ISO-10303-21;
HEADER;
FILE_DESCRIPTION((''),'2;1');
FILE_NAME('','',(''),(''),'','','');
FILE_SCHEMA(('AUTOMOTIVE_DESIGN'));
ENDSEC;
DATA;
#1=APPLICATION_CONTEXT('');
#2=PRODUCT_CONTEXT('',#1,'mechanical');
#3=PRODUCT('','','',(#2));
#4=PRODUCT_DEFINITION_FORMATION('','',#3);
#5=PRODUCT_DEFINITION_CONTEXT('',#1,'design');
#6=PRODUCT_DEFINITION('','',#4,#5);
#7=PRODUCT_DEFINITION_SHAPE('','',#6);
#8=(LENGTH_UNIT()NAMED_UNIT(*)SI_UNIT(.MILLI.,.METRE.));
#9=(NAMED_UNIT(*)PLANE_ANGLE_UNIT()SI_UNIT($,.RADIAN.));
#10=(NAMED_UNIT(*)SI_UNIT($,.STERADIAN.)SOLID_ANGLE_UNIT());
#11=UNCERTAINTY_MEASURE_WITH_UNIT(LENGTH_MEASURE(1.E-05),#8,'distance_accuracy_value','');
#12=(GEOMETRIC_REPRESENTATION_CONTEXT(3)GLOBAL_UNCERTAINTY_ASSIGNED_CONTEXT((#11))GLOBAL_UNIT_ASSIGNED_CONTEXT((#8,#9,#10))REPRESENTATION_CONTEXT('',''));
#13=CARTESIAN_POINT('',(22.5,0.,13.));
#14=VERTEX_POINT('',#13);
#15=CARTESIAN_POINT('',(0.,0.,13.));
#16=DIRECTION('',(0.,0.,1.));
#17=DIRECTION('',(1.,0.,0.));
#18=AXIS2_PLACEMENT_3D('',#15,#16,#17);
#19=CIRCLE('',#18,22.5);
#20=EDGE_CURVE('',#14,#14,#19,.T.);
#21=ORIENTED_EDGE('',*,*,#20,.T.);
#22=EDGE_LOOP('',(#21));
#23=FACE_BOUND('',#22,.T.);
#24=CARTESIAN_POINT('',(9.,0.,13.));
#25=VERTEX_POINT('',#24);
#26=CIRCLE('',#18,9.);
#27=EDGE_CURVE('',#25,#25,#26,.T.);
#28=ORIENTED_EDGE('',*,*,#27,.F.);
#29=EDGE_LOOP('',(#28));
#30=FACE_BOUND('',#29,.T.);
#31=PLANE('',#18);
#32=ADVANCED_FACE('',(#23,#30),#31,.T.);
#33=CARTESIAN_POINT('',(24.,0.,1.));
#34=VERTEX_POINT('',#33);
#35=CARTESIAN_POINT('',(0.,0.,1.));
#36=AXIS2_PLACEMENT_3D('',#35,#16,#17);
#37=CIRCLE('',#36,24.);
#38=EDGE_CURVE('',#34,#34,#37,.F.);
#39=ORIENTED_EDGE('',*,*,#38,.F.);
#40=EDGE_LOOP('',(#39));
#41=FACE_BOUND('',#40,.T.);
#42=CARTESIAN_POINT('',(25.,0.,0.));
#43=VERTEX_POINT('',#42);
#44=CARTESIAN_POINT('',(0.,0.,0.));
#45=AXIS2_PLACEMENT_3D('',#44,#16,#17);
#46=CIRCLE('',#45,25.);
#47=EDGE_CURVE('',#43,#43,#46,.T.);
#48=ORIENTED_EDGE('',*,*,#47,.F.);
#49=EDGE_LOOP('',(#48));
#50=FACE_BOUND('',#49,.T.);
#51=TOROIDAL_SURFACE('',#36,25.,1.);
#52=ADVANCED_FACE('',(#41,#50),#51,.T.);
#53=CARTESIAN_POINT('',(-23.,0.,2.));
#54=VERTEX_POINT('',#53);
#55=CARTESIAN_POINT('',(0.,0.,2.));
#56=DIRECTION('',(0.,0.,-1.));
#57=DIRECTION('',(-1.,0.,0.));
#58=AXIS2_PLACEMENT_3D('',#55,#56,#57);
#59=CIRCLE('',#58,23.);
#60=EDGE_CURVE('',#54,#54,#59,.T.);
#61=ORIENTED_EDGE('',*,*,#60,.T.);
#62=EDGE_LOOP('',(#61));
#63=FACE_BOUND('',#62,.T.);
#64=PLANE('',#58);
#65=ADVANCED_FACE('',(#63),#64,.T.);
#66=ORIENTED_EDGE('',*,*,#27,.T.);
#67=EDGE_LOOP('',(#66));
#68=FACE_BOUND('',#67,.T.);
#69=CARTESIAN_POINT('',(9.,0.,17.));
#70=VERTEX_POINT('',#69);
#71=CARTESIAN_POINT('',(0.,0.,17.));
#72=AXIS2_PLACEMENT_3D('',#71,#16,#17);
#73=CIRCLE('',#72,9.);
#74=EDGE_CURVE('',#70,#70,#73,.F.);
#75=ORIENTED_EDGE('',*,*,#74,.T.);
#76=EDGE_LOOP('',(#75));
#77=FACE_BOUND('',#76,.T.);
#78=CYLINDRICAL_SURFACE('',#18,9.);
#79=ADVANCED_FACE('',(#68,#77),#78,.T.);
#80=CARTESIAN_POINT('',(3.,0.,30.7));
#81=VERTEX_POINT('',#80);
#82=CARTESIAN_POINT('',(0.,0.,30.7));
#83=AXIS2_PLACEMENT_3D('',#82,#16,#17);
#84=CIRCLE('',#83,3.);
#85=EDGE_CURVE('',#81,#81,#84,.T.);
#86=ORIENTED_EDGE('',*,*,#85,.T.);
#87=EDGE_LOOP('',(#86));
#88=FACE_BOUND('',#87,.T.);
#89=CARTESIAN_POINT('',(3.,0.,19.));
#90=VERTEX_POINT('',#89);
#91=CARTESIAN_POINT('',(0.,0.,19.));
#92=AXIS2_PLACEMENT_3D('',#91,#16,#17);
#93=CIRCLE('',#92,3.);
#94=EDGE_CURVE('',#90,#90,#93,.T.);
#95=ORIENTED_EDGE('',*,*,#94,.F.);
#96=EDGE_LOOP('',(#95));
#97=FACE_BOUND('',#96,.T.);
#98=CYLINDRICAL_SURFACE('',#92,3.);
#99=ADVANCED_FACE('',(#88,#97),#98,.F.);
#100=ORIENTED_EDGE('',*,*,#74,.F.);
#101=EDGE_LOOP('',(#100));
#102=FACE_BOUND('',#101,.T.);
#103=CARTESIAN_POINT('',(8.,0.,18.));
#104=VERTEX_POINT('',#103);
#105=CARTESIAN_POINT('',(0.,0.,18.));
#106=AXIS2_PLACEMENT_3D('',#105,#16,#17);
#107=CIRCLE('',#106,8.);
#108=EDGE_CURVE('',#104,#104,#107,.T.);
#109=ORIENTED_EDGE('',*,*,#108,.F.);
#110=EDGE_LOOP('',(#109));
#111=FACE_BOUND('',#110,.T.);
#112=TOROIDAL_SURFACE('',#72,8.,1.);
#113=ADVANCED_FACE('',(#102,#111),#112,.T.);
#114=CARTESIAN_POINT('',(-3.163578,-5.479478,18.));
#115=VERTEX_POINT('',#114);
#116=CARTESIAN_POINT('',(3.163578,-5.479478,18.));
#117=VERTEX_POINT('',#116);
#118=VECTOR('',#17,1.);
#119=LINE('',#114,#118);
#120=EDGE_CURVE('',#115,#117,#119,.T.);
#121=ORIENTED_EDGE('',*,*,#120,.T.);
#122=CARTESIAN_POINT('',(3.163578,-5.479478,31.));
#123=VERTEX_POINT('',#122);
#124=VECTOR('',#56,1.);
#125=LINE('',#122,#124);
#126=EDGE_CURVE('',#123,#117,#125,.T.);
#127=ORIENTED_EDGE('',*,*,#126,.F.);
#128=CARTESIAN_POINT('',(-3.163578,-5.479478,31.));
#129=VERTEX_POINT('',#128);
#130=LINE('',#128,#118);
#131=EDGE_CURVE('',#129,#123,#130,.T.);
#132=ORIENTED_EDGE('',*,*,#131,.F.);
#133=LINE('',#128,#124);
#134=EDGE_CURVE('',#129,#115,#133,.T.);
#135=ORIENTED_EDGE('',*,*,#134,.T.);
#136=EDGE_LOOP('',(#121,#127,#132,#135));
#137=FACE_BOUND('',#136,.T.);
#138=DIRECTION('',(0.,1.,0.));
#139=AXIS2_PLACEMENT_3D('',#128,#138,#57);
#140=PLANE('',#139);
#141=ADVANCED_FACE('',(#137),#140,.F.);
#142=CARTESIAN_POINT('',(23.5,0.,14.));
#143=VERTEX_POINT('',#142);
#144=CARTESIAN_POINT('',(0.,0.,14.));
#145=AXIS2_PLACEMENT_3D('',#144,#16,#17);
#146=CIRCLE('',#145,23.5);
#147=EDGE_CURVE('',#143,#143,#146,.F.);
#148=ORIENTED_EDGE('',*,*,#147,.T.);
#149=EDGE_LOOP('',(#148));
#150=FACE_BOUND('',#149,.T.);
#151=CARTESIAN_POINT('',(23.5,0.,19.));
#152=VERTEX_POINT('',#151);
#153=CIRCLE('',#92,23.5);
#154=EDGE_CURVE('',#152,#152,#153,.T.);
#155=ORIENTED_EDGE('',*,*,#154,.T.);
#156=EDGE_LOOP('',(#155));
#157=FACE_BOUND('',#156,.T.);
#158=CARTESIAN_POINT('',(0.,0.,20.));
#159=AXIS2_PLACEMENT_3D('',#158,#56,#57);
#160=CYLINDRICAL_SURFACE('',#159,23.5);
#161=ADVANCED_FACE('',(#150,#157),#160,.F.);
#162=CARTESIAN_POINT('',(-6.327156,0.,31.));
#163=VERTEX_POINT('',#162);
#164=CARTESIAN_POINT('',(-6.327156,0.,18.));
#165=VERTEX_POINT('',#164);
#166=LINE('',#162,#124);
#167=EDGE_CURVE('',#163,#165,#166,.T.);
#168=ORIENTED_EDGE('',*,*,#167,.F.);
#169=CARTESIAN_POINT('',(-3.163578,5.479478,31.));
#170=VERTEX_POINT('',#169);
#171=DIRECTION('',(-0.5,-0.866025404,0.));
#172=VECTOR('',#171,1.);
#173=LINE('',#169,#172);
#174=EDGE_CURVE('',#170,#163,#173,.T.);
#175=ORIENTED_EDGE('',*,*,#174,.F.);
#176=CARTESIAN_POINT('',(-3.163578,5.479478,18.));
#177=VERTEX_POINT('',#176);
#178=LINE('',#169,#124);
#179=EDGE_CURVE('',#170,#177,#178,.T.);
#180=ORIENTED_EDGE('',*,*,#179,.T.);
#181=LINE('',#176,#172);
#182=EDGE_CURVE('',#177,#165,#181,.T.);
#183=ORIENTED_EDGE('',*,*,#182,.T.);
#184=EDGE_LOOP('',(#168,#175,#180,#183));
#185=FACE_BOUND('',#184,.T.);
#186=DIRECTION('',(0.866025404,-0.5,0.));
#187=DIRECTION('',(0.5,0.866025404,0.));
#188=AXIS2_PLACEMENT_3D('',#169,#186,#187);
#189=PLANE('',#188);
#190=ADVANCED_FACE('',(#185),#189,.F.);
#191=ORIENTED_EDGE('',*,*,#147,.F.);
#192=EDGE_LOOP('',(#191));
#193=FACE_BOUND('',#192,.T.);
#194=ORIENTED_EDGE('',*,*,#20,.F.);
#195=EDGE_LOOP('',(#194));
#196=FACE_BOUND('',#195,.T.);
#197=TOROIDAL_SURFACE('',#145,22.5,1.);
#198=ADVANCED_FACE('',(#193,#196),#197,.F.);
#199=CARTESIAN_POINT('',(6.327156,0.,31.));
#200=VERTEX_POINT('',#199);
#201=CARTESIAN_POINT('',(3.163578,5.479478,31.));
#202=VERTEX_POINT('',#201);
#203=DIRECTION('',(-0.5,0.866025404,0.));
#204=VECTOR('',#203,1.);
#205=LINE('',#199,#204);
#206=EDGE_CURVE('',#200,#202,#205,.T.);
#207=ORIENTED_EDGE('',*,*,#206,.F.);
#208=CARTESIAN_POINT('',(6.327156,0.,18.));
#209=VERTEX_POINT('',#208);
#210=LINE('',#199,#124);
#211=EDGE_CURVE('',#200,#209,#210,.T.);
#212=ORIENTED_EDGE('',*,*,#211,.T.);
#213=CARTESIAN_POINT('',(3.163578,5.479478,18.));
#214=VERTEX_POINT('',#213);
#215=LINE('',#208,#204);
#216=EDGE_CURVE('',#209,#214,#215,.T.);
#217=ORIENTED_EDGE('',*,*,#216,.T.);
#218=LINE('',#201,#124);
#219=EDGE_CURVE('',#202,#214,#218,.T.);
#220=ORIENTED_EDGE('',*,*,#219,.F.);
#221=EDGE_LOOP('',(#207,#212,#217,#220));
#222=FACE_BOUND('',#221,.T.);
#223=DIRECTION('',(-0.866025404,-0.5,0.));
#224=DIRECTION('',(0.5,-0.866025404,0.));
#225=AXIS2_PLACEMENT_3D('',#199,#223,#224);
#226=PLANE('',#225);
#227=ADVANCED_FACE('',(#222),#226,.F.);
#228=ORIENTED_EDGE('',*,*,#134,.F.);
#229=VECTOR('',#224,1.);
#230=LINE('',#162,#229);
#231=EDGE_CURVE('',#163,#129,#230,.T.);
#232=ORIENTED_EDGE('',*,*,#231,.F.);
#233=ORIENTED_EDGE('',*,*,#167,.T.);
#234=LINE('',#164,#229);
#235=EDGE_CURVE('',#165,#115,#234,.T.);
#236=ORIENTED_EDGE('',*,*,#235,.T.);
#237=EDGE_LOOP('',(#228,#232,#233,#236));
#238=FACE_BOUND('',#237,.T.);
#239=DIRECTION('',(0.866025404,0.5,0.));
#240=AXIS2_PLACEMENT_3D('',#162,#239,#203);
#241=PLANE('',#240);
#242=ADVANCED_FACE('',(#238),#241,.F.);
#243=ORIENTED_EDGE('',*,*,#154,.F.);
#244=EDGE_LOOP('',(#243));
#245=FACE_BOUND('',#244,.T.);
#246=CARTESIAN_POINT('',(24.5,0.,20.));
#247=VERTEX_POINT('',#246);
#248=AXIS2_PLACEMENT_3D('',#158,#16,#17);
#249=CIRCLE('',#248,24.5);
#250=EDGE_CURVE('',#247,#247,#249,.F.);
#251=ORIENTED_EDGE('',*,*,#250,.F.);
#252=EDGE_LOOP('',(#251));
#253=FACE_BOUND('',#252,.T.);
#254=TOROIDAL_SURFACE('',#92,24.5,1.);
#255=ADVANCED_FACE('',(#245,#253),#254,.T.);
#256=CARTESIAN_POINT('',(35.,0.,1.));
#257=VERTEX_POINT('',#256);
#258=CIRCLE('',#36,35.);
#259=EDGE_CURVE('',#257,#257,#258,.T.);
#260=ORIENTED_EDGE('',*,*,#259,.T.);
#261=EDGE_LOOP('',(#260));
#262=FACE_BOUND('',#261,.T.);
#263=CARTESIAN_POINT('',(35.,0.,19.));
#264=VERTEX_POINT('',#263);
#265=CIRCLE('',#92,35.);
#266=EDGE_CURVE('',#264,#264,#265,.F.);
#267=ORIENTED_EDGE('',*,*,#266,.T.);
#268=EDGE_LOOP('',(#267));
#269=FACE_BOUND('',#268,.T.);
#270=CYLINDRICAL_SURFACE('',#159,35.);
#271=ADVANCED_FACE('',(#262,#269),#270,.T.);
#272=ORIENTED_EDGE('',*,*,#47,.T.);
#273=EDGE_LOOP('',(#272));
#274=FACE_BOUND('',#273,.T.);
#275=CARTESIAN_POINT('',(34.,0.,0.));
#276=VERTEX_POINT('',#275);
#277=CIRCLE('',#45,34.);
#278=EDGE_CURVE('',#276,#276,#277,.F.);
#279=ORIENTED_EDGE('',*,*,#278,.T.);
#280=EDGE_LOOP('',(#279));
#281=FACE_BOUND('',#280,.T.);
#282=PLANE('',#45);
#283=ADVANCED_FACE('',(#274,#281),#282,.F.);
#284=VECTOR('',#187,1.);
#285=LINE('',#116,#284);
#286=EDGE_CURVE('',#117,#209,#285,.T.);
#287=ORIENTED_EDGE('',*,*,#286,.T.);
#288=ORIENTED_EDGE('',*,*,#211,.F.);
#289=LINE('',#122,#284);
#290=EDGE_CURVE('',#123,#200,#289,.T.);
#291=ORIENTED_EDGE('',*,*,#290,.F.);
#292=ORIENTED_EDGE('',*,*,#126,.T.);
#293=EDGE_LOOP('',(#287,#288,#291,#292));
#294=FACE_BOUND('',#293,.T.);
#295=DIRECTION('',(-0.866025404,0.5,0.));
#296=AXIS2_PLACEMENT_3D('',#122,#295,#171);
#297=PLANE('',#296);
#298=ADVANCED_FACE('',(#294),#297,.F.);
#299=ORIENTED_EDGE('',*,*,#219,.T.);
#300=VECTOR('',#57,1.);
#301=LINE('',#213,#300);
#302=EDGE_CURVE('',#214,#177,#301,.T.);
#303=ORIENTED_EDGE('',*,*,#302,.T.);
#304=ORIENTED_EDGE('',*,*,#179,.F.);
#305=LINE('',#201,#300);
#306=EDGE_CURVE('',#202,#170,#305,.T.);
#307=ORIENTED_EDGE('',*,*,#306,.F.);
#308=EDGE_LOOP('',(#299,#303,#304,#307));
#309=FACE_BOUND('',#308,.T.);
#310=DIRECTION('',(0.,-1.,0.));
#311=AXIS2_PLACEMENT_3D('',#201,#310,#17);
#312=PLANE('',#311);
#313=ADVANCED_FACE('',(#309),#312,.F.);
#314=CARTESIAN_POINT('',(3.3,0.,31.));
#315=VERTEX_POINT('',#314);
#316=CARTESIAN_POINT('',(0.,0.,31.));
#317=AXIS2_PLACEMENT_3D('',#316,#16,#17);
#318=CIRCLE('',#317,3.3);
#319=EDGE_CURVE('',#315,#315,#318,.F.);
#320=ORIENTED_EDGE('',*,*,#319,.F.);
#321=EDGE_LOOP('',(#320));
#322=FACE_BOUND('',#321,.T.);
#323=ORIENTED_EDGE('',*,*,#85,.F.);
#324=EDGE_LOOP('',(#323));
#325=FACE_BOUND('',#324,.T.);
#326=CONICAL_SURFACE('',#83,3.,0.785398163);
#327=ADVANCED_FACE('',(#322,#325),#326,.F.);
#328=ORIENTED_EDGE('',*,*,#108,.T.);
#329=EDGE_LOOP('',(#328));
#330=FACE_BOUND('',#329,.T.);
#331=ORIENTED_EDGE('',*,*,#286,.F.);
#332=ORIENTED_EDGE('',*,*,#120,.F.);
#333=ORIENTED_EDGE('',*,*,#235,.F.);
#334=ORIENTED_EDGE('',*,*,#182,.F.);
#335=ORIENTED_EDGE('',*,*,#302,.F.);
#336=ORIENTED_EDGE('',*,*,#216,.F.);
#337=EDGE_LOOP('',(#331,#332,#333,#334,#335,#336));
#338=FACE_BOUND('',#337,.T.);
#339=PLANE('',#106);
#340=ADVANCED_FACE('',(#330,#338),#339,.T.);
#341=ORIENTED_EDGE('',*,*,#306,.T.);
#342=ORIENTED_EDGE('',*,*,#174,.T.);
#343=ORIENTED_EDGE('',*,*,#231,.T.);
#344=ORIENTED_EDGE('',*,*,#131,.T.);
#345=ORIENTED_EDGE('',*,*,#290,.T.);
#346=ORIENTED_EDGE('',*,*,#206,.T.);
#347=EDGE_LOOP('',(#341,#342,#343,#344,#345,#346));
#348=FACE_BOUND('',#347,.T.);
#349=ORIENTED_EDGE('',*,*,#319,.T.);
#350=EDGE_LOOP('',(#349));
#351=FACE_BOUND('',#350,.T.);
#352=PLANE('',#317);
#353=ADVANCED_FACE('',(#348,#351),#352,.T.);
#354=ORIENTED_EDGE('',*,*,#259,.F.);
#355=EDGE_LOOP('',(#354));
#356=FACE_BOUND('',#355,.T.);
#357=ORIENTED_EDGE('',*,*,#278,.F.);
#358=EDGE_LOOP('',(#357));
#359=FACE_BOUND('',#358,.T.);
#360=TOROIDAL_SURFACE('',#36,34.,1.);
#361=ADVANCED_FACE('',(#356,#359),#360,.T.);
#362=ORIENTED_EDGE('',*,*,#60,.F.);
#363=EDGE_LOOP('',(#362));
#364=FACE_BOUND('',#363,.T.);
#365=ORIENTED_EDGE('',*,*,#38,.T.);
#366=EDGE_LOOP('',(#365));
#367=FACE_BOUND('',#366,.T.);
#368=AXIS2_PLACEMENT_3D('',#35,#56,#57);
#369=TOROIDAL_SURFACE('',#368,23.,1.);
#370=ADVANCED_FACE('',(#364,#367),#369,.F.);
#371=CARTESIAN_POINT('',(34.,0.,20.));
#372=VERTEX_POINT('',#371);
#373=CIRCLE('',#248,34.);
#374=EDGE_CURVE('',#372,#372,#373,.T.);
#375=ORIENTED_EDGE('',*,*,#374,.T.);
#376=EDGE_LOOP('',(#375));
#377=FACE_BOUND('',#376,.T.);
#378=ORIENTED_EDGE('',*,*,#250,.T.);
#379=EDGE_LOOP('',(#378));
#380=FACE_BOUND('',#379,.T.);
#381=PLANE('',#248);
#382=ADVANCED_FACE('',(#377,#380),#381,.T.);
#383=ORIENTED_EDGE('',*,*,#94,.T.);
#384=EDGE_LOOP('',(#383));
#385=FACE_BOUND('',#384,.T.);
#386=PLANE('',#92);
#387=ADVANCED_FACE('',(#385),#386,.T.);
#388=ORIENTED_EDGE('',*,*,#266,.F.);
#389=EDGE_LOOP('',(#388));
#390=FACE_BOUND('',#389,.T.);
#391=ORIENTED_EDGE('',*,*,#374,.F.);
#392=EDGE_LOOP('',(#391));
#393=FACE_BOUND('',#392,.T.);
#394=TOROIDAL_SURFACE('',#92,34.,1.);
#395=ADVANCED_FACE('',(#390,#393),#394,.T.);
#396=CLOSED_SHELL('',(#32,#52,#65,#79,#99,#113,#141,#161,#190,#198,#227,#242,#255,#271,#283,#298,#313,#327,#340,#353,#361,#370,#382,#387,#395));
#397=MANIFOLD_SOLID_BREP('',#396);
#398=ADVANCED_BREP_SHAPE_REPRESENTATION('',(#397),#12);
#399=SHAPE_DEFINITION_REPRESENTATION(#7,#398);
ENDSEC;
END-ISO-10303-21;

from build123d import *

# Parameters (mm, degrees)
SKETCH_1_R          = 35
SKETCH_1_R_2        = 23.5
EXTRUDE_1_DEPTH     = 20
SKETCH_2_R          = 23.5
EXTRUDE_2_DEPTH     = 18
EXTRUDE_3_DEPTH     = 13
CUT_EXTRUDE_START   = -5
SKETCH_4_R          = 23.5
SKETCH_4_R_2        = 9
CUT_EXTRUDE_1_DEPTH = 5
SKETCH_5_R          = 3
CUT_EXTRUDE_2_DEPTH = 12
SKETCH_7_R          = 24
CUT_EXTRUDE_3_DEPTH = 2
FILLET_1_R          = 1
CHAMFER_1_SIZE      = 0.3


with BuildPart() as part:
    # 草图1 → 凸台-拉伸1 (new body)
    with BuildSketch(Plane.XY):
        Circle(SKETCH_1_R)
        Circle(SKETCH_1_R_2, mode=Mode.SUBTRACT)
    extrude(amount=EXTRUDE_1_DEPTH)

    # 草图2 → 凸台-拉伸2 (add)
    with BuildSketch(Plane.XY):
        Circle(SKETCH_2_R)
    extrude(amount=EXTRUDE_2_DEPTH)

    # 草图3 → 凸台-拉伸3 (add)
    with BuildSketch(Plane.XY.offset(18)):
        Polygon((6.327155881, 0), (3.163577941, 5.479477727), (-3.163577941, 5.479477727), (-6.327155881, 0), (-3.163577941, -5.479477727), (3.163577941, -5.479477727), align=None)
    extrude(amount=EXTRUDE_3_DEPTH)

    # 草图4 → 切除-拉伸1 (cut)
    with BuildSketch(Plane.XY.offset(18).offset(CUT_EXTRUDE_START)):
        Circle(SKETCH_4_R)
        Circle(SKETCH_4_R_2, mode=Mode.SUBTRACT)
    extrude(amount=CUT_EXTRUDE_1_DEPTH, mode=Mode.SUBTRACT)

    # 草图5 → 切除-拉伸2 (cut)
    with BuildSketch(Plane.XY.offset(31)):
        Circle(SKETCH_5_R)
    extrude(amount=-CUT_EXTRUDE_2_DEPTH, mode=Mode.SUBTRACT)

    # 草图7 → 切除-拉伸3 (cut)
    with BuildSketch(Plane(origin=(0, 0, 0), x_dir=(-1, 0, 0), z_dir=(0, 0, -1))):
        Circle(SKETCH_7_R)
    extrude(amount=-CUT_EXTRUDE_3_DEPTH, mode=Mode.SUBTRACT)

    # 圆角1
    fillet_1_edges = [part.edges().sort_by_distance(p)[0] for p in [
        (-35, 0, 0),
        (-23.5, 0, 13),
        (-9, 0, 18),
        (24, 0, 2),
        (24, 0, 0),
        (-35, 0, 20),
        (-23.5, 0, 20),
    ]]
    fillet(fillet_1_edges, radius=FILLET_1_R - 0.0001)  # a hair under: the kernel refuses the full size

    # 倒角1
    chamfer_1_edges = [part.edges().sort_by_distance(p)[0] for p in [
        (-3, 0, 31),
    ]]
    chamfer(chamfer_1_edges, length=CHAMFER_1_SIZE)


solid = part.part
